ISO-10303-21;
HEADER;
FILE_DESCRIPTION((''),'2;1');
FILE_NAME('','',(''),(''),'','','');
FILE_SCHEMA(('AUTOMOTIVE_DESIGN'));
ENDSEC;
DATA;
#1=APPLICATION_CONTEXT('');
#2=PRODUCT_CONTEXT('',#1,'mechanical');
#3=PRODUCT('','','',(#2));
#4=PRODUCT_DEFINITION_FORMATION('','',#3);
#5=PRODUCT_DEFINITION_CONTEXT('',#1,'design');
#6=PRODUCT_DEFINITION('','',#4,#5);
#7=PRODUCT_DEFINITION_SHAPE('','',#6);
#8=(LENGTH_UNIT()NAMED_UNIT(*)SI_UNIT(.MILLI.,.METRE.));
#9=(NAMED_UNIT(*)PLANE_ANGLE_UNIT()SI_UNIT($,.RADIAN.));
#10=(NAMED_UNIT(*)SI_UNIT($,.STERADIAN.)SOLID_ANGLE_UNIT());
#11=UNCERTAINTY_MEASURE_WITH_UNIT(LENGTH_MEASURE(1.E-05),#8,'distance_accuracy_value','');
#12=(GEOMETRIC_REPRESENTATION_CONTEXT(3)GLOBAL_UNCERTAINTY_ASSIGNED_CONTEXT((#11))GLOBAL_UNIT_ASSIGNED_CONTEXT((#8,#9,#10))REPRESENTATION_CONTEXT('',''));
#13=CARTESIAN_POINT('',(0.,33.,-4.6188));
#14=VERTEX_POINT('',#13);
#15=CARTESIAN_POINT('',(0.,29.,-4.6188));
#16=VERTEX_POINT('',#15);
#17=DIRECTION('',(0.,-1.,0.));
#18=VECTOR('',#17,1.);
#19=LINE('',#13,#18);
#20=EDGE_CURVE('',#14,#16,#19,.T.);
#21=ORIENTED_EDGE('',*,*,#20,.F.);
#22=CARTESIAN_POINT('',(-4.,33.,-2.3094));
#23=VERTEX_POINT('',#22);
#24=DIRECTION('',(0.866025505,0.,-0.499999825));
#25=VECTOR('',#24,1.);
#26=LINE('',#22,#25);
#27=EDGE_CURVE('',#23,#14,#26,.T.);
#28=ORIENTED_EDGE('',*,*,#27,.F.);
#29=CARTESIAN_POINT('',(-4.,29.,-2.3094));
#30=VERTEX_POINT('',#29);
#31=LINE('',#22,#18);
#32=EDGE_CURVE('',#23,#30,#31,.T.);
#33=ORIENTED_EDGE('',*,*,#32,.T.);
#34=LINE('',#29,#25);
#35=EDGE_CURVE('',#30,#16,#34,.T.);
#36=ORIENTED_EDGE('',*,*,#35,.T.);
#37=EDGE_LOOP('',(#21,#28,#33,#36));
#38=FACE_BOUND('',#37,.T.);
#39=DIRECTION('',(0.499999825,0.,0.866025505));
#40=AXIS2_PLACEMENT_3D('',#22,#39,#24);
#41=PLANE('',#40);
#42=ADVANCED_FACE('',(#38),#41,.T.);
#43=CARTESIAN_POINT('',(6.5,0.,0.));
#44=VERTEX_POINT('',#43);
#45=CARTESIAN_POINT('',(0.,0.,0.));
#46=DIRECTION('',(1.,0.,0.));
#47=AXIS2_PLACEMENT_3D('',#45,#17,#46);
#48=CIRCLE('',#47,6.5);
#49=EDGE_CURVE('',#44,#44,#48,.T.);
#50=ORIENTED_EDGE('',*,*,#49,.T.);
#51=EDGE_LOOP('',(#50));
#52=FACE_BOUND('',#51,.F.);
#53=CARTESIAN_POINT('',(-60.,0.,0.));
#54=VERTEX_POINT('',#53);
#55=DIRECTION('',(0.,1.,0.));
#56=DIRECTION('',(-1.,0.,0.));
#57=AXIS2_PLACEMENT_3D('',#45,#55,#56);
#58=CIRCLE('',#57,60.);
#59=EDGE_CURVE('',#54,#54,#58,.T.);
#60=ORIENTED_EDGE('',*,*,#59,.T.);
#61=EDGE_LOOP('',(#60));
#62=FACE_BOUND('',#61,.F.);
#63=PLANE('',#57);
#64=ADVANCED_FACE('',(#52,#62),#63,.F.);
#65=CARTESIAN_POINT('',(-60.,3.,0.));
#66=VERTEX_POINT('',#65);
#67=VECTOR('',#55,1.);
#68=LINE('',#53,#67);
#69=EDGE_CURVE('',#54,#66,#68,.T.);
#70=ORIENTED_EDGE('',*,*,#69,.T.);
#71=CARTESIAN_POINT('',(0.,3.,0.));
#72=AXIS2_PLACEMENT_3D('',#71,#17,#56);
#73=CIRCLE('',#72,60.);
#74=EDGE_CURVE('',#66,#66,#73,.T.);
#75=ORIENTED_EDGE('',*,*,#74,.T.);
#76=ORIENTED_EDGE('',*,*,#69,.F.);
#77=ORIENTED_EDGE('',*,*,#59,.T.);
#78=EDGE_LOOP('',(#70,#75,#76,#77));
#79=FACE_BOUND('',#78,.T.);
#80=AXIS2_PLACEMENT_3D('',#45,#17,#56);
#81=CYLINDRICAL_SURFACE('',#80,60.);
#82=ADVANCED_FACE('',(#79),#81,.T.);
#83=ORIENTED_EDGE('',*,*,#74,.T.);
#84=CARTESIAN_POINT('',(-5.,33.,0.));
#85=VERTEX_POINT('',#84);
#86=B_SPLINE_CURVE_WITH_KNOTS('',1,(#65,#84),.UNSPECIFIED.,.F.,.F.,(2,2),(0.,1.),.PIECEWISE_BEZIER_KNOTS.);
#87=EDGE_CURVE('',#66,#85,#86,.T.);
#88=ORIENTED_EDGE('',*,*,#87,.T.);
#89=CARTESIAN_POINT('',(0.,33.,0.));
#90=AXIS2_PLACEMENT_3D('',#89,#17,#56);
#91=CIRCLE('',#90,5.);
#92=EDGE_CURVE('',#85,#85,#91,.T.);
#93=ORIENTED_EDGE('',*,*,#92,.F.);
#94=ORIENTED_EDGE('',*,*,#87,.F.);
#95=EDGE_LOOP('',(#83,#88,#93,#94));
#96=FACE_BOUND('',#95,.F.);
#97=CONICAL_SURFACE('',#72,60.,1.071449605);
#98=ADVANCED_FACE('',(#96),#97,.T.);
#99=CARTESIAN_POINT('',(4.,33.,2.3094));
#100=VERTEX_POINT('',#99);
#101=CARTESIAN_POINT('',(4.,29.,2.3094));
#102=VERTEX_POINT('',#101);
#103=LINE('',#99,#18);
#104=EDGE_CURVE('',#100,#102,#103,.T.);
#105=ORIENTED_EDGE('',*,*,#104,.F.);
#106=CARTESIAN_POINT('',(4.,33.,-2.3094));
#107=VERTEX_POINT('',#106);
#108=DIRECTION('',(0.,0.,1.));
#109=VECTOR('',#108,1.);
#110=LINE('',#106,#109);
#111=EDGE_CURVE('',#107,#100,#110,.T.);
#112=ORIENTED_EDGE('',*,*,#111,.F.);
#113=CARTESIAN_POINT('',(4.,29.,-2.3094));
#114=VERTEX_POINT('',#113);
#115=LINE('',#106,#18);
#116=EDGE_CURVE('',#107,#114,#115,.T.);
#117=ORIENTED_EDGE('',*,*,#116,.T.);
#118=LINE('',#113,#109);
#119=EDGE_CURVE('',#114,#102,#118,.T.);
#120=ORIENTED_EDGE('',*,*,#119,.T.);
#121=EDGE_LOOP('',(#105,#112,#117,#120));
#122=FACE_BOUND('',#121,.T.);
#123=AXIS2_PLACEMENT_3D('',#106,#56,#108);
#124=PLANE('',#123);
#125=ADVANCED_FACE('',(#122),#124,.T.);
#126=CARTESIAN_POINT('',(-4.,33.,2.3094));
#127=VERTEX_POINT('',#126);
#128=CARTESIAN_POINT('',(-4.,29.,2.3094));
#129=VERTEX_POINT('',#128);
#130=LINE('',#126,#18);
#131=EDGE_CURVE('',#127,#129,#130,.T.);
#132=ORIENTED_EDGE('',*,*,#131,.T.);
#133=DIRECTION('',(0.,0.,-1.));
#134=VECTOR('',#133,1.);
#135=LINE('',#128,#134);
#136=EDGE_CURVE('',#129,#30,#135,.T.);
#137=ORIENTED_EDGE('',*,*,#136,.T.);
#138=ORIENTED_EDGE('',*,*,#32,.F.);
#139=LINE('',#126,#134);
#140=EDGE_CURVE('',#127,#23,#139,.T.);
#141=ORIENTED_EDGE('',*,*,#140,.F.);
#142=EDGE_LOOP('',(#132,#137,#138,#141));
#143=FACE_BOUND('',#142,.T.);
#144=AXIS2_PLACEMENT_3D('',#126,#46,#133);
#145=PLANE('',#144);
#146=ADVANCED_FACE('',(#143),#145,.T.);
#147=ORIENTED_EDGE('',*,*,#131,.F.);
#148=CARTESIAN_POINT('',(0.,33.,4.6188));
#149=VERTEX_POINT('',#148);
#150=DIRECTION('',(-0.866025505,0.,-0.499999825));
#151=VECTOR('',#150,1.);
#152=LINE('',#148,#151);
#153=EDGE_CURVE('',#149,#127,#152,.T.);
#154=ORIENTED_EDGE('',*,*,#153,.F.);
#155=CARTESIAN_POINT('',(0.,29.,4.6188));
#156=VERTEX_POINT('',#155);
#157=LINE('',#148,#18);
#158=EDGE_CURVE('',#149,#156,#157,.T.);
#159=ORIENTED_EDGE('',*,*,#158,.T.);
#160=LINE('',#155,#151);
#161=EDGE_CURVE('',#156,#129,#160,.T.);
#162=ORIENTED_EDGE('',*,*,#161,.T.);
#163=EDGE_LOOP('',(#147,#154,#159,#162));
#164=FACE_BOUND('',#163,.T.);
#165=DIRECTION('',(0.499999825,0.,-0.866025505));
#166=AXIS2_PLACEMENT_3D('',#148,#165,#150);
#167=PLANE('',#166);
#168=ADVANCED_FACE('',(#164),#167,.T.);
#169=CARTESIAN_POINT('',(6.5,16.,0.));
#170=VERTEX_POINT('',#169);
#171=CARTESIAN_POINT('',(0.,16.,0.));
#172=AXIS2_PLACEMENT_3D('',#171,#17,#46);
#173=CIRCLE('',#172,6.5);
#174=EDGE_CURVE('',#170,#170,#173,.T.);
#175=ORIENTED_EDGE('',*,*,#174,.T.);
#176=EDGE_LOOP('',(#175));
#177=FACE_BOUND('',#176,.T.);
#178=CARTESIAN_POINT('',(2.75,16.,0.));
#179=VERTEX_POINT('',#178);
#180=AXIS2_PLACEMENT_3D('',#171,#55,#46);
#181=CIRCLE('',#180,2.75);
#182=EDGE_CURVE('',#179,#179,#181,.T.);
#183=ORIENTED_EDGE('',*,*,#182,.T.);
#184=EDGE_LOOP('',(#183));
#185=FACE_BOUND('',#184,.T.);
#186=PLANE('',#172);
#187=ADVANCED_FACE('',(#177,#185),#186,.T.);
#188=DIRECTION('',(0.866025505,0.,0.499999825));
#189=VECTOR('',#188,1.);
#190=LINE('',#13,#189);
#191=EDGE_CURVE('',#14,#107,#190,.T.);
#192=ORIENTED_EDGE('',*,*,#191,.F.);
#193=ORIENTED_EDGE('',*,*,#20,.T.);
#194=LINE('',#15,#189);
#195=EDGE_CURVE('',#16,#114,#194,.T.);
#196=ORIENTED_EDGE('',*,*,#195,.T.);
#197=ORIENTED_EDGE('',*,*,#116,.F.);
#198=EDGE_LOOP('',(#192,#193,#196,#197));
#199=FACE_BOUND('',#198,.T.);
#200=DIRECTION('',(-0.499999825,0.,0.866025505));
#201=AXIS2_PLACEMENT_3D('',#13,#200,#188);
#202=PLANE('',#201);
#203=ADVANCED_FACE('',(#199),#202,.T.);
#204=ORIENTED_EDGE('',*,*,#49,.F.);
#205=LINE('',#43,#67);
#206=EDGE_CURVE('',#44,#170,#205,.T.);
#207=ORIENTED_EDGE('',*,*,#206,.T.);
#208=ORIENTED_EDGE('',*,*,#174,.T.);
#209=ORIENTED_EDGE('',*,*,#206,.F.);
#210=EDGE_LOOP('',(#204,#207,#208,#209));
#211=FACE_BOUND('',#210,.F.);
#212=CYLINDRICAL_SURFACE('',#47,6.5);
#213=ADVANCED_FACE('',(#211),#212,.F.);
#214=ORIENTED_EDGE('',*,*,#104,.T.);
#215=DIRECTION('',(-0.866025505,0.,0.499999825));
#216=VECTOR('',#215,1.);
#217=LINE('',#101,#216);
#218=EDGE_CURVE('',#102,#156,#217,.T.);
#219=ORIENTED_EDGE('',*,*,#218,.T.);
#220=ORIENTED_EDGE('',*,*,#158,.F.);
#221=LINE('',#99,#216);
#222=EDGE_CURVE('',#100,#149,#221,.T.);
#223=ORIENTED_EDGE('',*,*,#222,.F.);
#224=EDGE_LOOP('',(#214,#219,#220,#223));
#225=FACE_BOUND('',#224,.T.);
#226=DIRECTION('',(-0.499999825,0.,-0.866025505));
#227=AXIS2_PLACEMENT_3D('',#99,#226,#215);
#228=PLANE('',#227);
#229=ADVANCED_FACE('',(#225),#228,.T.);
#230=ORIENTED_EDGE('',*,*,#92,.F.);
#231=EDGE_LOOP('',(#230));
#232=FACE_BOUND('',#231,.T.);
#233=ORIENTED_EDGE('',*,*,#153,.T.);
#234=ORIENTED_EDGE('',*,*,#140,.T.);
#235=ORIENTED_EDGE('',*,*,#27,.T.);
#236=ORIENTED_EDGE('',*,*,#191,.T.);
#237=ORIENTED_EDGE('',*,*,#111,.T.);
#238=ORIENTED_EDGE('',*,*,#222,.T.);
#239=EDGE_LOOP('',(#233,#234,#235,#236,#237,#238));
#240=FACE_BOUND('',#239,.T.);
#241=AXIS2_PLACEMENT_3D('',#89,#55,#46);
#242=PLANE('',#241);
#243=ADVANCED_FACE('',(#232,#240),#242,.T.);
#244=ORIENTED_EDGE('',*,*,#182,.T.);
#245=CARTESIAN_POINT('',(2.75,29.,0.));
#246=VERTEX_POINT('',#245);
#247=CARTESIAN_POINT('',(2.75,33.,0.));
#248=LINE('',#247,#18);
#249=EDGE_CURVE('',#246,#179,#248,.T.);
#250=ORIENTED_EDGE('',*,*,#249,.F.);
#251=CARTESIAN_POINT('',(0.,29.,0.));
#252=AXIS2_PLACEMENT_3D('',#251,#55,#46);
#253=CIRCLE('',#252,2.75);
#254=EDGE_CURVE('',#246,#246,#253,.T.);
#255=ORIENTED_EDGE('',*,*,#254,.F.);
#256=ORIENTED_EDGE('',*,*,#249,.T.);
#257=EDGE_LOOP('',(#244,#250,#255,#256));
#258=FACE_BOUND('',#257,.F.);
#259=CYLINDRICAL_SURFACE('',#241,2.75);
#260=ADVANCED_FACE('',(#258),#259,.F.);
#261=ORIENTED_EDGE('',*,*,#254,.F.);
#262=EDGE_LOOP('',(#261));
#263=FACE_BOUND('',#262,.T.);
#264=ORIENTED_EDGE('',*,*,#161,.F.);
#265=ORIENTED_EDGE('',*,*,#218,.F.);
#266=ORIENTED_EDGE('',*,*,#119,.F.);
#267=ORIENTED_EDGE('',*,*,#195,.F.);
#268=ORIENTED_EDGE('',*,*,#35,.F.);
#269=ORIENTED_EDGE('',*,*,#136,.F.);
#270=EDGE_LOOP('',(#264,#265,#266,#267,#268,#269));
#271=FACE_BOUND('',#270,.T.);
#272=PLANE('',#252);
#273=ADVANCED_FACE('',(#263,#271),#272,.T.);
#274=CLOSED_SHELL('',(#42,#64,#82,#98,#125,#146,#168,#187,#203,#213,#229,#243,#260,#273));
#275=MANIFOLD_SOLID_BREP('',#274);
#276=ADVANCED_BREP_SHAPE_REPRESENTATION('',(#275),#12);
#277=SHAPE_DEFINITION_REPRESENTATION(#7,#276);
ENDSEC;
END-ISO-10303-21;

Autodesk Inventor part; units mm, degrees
ref_plane "YZ Plane" through (0, 0, 0) normal (1, 0, 0) x (0, 1, 0)
ref_plane "XZ Plane" through (0, 0, 0) normal (0, 1, 0) x (-1, 0, 0)
sketch "Sketch1" plane through (0, 0, 0) normal (0, 1, 0) x (-1, 0, 0)
  circle A0 centre (0, 0) radius 60
  dimension "d0" = 120
extrude "Extrusion1" add sketch "Sketch1" along normal blind 3
ref_plane "Work Plane1" through (0, 33, 0) normal (0, 1, 0) x (1, 0, 0)
sketch "Sketch2" plane through (0, 33, 0) normal (0, 1, 0) x (1, 0, 0)
  circle A0 centre (0, 0) radius 5
  dimension "d5" = 10
loft "Loft1" add profiles "Sketch2" section 1 edges at (60, 3, 0)
sketch "Sketch3" plane through (0, 0, 0) normal (0, -1, 0) x (1, 0, 0)
  circle A0 centre (0, 0) radius 6.5
  dimension "d10" = 13
extrude "Extrusion2" cut sketch "Sketch3" against normal blind 16
sketch "Sketch5" plane through (0, 33, 0) normal (0, 1, 0) x (1, 0, 0)
  circle A0 centre (0, 0) radius 2.75
  dimension "d16" = 5.5
extrude "Extrusion4" cut sketch "Sketch5" against normal through all
sketch "Sketch6" plane through (0, 33, 0) normal (0, 1, 0) x (1, 0, 0)
  line L0 (0, 4.6188) -> (4, 2.3094)
  line L1 (4, 2.3094) -> (4, -2.3094)
  line L2 (4, -2.3094) -> (0, -4.6188)
  line L3 (0, -4.6188) -> (-4, -2.3094)
  line L4 (-4, -2.3094) -> (-4, 2.3094)
  line L5 (-4, 2.3094) -> (0, 4.6188)
  point P0 (0, 0)
  point P1 (0, 0)
  dimension "d19" = 8
extrude "Extrusion5" cut sketch "Sketch6" against normal blind 4
properties part number "Bottom_Foot"
